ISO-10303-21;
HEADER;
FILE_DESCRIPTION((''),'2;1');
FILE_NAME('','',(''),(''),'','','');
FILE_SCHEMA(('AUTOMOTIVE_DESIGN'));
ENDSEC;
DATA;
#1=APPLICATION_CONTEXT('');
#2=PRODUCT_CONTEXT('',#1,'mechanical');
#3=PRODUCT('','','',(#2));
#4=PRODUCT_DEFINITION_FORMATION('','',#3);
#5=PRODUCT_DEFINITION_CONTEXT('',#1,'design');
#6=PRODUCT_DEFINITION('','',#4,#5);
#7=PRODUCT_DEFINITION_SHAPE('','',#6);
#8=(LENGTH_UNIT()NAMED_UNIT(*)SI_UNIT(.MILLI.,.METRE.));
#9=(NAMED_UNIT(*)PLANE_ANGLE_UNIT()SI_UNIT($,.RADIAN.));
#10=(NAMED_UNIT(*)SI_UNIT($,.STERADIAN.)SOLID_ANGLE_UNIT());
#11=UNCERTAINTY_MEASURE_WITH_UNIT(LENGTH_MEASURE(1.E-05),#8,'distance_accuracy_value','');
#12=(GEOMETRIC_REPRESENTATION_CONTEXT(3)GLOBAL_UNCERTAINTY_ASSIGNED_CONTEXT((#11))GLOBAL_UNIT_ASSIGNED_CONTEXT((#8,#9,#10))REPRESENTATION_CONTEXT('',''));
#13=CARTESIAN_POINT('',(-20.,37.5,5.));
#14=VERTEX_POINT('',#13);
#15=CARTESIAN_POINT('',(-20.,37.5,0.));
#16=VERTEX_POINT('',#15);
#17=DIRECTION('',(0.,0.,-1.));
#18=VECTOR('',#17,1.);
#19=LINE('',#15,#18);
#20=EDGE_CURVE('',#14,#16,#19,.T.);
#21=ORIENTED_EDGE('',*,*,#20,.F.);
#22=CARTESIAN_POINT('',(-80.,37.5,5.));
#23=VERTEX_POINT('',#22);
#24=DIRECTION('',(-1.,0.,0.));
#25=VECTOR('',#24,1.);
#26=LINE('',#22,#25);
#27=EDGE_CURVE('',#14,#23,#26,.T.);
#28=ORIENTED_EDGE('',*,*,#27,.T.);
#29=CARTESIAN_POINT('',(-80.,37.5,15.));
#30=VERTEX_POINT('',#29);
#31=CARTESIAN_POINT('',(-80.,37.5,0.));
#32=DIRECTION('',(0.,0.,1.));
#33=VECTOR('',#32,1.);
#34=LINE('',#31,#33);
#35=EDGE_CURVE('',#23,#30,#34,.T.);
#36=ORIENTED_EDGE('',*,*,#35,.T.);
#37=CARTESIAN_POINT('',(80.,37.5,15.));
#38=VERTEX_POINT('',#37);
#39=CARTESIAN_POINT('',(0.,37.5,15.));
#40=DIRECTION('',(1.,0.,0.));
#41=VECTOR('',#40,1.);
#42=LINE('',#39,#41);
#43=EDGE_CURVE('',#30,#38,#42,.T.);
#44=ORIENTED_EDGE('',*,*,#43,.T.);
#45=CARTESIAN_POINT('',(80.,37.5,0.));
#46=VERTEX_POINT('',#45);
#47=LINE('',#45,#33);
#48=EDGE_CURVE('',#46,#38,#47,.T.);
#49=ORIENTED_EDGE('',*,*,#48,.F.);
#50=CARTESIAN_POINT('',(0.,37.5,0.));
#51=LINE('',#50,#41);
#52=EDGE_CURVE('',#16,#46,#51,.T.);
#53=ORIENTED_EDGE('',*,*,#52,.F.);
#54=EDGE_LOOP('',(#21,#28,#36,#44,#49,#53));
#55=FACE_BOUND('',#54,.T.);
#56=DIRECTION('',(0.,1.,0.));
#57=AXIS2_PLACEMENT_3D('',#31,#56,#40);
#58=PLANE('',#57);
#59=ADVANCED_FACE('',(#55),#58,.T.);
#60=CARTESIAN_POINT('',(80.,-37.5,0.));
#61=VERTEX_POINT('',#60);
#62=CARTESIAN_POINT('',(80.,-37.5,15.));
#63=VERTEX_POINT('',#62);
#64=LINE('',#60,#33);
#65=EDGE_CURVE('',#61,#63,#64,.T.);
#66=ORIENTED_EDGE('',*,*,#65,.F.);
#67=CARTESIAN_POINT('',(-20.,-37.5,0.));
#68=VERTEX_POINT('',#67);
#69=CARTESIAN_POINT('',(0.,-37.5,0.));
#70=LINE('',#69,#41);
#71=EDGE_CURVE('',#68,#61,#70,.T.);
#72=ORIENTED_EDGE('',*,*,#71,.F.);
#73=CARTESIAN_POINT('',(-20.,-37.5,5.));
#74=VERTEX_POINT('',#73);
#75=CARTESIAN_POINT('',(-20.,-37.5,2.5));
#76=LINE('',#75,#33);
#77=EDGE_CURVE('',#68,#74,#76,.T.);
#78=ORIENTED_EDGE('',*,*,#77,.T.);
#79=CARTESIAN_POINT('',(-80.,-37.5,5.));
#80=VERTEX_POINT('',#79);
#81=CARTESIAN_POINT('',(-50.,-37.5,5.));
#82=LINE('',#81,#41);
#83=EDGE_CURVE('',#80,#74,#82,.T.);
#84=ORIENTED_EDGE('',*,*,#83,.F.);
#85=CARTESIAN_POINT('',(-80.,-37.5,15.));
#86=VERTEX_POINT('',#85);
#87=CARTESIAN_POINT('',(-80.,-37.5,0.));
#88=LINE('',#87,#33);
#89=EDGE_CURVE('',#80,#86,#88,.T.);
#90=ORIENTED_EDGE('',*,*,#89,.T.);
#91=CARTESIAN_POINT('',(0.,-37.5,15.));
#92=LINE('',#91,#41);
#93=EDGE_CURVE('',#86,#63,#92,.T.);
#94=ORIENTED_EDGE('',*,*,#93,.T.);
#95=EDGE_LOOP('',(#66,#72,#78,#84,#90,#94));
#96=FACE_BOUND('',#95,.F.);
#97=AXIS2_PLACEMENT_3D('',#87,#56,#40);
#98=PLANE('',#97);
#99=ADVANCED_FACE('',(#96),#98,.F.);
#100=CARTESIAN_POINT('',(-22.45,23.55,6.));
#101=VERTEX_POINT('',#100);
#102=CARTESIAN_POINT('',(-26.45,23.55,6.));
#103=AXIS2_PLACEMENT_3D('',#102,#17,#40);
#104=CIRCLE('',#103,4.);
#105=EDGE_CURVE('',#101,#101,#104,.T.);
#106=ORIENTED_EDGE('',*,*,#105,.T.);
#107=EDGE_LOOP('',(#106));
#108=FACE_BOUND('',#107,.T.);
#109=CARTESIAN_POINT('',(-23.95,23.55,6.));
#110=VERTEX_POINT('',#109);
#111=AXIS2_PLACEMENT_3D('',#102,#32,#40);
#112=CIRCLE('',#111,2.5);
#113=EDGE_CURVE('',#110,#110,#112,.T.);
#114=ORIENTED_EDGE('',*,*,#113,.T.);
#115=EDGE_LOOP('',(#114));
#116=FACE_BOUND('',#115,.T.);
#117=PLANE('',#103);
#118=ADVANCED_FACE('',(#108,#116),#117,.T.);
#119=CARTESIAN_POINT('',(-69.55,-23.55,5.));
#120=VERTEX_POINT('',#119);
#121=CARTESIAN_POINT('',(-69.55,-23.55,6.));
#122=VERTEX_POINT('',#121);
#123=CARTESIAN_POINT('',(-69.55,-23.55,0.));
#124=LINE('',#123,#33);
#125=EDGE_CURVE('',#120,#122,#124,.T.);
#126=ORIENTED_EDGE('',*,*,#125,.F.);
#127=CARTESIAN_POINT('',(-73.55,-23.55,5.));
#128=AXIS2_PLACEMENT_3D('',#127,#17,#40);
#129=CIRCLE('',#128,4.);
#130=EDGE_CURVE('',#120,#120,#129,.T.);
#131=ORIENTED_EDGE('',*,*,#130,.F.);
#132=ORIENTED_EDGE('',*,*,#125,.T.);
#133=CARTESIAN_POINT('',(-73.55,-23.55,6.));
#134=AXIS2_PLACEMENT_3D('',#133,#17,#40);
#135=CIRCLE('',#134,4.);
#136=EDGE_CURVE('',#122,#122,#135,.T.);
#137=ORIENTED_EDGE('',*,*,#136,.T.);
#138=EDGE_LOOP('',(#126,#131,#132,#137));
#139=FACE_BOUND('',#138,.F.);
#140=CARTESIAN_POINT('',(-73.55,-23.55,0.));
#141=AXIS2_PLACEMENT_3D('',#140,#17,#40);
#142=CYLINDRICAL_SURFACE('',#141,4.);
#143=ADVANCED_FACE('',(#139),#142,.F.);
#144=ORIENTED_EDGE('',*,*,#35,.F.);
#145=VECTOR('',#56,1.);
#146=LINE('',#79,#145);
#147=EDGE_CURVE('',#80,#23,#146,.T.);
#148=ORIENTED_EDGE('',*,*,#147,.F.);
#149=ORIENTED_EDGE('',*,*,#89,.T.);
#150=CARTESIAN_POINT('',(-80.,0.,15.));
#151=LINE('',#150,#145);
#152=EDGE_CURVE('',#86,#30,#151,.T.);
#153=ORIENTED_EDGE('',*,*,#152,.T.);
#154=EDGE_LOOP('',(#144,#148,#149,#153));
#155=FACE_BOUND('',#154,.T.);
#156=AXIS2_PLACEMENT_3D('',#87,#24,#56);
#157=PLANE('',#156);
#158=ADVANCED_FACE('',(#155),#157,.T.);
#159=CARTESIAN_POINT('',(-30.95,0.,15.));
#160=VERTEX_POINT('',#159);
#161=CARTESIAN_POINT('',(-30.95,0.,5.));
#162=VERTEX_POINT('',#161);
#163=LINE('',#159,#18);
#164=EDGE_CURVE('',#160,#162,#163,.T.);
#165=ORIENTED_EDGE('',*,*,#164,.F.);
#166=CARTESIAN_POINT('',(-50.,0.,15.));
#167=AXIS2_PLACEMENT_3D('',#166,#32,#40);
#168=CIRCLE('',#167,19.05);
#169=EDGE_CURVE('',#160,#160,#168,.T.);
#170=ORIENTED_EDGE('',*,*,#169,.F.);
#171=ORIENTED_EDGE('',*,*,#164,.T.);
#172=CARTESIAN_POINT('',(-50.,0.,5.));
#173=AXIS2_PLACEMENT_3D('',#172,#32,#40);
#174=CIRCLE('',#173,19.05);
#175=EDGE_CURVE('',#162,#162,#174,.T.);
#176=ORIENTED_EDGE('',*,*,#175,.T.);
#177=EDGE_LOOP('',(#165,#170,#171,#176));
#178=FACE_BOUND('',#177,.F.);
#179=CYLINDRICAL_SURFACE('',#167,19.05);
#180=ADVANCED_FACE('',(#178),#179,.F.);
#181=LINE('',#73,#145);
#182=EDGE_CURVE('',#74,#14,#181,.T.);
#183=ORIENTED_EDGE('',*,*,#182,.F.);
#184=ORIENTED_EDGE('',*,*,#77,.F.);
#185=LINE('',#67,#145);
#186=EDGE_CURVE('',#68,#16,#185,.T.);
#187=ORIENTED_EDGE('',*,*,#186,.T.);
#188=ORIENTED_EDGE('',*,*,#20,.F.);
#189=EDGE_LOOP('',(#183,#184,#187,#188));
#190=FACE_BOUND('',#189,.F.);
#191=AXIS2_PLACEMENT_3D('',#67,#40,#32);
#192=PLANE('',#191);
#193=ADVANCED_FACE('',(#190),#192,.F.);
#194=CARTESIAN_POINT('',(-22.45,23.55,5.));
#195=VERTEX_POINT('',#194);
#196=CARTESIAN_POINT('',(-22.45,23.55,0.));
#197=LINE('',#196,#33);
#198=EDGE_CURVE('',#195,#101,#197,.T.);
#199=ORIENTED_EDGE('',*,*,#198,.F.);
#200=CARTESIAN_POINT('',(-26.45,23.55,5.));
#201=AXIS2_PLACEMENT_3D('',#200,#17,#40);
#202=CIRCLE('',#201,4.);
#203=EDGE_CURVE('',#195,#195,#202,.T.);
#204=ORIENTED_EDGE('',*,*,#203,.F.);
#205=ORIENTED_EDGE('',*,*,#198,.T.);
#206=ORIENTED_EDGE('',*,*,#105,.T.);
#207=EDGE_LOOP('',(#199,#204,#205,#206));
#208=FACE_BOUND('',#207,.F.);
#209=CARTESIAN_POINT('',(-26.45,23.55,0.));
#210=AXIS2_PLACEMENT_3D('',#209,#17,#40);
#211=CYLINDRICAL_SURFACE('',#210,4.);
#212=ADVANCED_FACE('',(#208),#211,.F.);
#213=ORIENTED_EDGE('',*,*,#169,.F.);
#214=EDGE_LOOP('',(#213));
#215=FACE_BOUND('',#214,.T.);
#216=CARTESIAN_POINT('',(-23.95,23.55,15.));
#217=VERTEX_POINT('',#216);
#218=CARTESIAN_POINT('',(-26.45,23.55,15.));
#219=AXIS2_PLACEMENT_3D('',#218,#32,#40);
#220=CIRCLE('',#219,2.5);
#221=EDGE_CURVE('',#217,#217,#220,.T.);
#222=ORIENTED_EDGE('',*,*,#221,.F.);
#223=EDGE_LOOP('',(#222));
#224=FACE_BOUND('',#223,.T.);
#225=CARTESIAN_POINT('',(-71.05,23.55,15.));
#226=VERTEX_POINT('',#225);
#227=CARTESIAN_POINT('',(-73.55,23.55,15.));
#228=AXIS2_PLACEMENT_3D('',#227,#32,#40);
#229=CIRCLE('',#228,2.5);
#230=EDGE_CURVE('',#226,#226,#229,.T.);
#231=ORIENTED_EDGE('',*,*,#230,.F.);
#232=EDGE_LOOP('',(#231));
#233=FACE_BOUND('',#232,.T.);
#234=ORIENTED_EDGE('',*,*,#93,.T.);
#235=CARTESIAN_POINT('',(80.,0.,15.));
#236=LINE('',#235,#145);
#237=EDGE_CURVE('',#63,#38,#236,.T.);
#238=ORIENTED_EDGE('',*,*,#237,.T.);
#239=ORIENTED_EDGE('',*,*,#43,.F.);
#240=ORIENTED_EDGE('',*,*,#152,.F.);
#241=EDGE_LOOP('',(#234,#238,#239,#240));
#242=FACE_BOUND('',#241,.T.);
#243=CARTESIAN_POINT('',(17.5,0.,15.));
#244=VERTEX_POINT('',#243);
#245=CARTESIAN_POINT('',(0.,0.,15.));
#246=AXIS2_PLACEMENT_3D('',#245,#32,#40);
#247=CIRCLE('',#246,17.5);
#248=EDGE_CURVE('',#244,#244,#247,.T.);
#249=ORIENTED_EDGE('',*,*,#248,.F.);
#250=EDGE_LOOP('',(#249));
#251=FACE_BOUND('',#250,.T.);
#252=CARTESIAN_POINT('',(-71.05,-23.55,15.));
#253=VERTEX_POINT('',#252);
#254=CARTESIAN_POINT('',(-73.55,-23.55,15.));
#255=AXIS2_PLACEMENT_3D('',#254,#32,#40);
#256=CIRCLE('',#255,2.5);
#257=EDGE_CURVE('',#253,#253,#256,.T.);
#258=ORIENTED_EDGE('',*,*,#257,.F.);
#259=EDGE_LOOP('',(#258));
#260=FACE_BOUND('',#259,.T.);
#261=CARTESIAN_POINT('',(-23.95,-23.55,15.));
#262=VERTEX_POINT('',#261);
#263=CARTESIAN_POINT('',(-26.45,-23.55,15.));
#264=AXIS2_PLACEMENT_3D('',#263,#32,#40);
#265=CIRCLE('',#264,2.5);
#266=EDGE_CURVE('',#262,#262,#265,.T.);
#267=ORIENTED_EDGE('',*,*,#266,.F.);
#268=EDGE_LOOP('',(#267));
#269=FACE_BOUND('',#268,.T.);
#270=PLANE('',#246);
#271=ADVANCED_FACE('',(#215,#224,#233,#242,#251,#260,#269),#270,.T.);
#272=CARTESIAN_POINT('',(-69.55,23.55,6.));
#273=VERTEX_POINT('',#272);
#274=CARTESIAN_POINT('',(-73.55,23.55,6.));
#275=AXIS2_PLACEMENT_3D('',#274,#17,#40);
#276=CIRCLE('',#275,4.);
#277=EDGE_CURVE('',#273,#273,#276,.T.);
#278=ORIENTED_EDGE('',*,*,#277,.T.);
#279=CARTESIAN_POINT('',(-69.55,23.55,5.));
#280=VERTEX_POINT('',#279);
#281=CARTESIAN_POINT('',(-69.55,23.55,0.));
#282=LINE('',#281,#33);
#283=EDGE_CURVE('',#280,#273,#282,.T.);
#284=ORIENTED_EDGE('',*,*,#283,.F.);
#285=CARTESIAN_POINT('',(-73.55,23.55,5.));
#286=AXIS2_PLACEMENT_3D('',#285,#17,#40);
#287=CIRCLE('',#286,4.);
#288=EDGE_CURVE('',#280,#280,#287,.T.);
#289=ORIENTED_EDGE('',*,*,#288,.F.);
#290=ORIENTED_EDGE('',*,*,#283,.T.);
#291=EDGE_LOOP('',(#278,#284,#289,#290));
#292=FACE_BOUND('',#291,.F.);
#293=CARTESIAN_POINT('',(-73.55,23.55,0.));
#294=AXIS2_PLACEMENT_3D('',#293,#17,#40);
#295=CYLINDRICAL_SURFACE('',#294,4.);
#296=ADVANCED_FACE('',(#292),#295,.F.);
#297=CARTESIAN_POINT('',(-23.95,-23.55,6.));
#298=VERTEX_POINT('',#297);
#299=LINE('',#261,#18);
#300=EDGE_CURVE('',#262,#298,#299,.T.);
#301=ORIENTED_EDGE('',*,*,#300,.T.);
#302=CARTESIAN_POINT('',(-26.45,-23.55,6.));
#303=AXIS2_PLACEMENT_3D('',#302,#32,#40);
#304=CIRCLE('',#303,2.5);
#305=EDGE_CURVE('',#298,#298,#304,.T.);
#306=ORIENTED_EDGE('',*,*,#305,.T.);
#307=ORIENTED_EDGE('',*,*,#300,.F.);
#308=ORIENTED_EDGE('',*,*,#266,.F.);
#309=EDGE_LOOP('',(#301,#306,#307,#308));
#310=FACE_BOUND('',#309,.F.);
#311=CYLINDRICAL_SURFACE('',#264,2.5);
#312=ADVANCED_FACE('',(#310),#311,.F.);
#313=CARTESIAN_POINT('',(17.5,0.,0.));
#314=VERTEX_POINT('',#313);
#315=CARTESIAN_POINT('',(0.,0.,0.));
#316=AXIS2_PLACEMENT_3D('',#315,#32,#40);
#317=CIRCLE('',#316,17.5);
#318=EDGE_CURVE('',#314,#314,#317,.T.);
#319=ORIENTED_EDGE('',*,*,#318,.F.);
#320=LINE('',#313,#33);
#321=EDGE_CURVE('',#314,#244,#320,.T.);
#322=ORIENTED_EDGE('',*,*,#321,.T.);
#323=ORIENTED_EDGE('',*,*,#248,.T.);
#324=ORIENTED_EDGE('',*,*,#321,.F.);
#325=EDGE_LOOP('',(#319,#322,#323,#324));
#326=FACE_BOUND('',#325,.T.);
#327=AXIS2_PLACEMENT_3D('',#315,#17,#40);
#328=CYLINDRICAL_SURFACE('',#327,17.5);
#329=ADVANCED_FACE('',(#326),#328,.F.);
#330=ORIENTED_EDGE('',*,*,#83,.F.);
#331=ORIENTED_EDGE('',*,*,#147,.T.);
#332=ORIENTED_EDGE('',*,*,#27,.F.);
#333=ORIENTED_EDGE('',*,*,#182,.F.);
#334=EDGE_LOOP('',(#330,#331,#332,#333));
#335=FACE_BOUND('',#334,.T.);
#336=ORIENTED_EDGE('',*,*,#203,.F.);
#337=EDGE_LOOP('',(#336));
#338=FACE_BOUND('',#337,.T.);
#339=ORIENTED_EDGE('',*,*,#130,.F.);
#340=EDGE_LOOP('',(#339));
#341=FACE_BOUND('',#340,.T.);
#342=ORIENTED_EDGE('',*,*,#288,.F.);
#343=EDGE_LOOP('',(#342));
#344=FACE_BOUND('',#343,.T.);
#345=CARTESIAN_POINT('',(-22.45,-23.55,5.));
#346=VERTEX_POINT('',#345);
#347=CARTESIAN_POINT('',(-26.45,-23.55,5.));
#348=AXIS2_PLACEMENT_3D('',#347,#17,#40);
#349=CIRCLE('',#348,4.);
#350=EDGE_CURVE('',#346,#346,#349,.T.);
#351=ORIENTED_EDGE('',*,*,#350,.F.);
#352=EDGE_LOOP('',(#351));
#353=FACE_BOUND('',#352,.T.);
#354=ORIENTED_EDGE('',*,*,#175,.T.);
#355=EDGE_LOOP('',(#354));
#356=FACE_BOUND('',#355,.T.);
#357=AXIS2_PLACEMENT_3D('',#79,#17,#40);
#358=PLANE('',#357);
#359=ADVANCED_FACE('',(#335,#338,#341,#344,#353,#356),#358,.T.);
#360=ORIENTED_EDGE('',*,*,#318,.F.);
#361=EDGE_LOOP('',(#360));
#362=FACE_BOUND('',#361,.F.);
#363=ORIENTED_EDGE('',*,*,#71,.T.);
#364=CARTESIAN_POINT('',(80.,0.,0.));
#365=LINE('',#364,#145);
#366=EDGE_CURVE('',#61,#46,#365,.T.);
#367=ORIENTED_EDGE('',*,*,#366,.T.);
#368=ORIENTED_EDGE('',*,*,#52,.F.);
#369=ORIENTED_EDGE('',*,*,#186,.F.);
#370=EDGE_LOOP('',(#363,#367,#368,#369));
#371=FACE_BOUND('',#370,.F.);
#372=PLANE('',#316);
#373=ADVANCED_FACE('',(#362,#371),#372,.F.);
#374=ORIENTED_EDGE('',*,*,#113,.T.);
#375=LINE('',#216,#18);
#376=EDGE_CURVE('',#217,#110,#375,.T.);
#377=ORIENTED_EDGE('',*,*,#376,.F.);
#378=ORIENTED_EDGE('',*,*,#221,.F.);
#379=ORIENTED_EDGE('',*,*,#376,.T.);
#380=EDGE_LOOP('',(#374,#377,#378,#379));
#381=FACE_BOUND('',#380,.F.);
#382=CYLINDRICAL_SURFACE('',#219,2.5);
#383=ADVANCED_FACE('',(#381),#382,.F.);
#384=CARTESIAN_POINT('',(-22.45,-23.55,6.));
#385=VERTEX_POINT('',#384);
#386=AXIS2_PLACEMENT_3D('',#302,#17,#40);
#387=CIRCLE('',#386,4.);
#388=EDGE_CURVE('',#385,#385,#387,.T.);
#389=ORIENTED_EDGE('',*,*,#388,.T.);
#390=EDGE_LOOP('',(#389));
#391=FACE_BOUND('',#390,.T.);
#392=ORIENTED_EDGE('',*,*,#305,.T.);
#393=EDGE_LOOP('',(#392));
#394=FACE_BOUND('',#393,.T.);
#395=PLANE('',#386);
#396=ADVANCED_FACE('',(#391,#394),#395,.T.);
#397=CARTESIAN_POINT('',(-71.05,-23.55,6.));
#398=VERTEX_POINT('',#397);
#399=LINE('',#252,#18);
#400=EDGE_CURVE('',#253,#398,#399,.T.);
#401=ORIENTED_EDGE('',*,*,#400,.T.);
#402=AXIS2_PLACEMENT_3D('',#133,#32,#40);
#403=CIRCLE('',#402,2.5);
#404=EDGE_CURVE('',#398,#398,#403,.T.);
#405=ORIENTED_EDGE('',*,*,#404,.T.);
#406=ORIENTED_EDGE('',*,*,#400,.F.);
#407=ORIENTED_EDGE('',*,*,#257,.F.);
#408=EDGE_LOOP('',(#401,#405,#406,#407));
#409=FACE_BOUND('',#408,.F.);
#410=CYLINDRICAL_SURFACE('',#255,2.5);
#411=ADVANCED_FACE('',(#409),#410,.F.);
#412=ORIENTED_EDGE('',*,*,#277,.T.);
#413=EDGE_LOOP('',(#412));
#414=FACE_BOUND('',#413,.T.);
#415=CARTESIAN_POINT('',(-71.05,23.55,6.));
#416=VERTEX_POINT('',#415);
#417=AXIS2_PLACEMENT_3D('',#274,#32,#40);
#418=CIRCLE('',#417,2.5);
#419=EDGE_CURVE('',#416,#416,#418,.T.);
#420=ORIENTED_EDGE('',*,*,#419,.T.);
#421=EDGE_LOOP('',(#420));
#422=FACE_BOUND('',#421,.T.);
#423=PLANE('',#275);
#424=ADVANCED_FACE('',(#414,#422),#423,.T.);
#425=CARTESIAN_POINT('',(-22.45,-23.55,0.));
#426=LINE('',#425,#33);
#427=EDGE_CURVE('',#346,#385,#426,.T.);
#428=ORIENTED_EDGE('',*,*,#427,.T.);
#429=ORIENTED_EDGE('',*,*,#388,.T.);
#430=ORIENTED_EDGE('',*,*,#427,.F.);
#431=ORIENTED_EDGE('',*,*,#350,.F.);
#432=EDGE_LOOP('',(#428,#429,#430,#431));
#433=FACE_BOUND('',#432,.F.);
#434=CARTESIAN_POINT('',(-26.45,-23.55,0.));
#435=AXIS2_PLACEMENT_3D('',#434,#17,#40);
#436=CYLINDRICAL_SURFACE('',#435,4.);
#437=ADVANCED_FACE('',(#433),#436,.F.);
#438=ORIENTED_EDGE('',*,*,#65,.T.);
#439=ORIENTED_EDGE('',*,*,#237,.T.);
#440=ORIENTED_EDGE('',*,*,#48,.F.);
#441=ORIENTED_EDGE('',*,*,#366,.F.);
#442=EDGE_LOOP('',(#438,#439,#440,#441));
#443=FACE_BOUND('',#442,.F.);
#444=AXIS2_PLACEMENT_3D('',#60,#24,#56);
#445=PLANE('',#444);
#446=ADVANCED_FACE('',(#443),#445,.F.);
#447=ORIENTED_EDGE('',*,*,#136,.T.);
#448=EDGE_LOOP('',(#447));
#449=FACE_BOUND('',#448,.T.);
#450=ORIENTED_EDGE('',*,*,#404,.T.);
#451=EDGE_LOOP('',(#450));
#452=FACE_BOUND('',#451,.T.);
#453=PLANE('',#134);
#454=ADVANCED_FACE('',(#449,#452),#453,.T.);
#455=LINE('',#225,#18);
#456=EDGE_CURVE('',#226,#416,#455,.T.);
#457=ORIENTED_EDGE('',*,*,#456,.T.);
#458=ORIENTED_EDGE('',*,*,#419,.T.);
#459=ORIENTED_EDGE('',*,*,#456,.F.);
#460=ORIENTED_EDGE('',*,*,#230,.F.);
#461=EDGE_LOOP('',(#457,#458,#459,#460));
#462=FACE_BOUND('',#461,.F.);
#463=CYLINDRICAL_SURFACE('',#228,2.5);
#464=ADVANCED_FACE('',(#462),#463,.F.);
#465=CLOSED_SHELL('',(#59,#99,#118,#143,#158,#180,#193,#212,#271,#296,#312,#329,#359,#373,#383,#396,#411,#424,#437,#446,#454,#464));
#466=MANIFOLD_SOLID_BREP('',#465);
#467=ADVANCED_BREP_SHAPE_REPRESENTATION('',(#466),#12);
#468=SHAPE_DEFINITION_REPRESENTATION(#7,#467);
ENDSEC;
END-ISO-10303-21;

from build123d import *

# Parameters (mm, degrees)
F0_W     = 160
F0_H     = 75
F0_R     = 17.5
F1_DEPTH = 15
F2_R     = 2.5
F2_R_2   = 19.05
F3_DEPTH = 25
F4_R     = 4
F5_DEPTH = 6
F6_W     = 60
F6_H     = 5
F7_DEPTH = 79.7


# Not quite as in the source:
# - a feature names something its author has since deleted; it is built from what else it names


with BuildPart() as f1:
    # F0 (on Top) → F1 (new body)
    with BuildSketch(Plane.XY):
        Rectangle(F0_W, F0_H)
        Circle(F0_R, mode=Mode.SUBTRACT)
    extrude(amount=F1_DEPTH)

    # F2 (on face) → F3 (cut)
    with BuildSketch(Plane.XY.offset(15)):
        with Locations((-73.55, 23.55)):
            Circle(F2_R)
        with Locations((-26.45, 23.55)):
            Circle(F2_R)
        with Locations((-26.45, -23.55)):
            Circle(F2_R)
        with Locations((-73.55, -23.55)):
            Circle(F2_R)
        with Locations((-50, 0)):
            Circle(F2_R_2)
    extrude(amount=-F3_DEPTH, mode=Mode.SUBTRACT)

    # F4 (on face) → F5 (cut)
    with BuildSketch(Plane(origin=(0, 0, 0), x_dir=(1, 0, 0), z_dir=(0, 0, -1))):
        with Locations((-73.55, 23.55)):
            Circle(F4_R)
        with Locations((-26.45, 23.55)):
            Circle(F4_R)
        with Locations((-26.45, -23.55)):
            Circle(F4_R)
        with Locations((-73.55, -23.55)):
            Circle(F4_R)
    extrude(amount=-F5_DEPTH, mode=Mode.SUBTRACT)

    # F6 (on face) → F7 (cut)
    with BuildSketch(Plane.XZ.offset(37.5)):
        with Locations((-50, 2.5)):
            Rectangle(F6_W, F6_H)
    extrude(amount=-F7_DEPTH, mode=Mode.SUBTRACT)


solid = f1.part
